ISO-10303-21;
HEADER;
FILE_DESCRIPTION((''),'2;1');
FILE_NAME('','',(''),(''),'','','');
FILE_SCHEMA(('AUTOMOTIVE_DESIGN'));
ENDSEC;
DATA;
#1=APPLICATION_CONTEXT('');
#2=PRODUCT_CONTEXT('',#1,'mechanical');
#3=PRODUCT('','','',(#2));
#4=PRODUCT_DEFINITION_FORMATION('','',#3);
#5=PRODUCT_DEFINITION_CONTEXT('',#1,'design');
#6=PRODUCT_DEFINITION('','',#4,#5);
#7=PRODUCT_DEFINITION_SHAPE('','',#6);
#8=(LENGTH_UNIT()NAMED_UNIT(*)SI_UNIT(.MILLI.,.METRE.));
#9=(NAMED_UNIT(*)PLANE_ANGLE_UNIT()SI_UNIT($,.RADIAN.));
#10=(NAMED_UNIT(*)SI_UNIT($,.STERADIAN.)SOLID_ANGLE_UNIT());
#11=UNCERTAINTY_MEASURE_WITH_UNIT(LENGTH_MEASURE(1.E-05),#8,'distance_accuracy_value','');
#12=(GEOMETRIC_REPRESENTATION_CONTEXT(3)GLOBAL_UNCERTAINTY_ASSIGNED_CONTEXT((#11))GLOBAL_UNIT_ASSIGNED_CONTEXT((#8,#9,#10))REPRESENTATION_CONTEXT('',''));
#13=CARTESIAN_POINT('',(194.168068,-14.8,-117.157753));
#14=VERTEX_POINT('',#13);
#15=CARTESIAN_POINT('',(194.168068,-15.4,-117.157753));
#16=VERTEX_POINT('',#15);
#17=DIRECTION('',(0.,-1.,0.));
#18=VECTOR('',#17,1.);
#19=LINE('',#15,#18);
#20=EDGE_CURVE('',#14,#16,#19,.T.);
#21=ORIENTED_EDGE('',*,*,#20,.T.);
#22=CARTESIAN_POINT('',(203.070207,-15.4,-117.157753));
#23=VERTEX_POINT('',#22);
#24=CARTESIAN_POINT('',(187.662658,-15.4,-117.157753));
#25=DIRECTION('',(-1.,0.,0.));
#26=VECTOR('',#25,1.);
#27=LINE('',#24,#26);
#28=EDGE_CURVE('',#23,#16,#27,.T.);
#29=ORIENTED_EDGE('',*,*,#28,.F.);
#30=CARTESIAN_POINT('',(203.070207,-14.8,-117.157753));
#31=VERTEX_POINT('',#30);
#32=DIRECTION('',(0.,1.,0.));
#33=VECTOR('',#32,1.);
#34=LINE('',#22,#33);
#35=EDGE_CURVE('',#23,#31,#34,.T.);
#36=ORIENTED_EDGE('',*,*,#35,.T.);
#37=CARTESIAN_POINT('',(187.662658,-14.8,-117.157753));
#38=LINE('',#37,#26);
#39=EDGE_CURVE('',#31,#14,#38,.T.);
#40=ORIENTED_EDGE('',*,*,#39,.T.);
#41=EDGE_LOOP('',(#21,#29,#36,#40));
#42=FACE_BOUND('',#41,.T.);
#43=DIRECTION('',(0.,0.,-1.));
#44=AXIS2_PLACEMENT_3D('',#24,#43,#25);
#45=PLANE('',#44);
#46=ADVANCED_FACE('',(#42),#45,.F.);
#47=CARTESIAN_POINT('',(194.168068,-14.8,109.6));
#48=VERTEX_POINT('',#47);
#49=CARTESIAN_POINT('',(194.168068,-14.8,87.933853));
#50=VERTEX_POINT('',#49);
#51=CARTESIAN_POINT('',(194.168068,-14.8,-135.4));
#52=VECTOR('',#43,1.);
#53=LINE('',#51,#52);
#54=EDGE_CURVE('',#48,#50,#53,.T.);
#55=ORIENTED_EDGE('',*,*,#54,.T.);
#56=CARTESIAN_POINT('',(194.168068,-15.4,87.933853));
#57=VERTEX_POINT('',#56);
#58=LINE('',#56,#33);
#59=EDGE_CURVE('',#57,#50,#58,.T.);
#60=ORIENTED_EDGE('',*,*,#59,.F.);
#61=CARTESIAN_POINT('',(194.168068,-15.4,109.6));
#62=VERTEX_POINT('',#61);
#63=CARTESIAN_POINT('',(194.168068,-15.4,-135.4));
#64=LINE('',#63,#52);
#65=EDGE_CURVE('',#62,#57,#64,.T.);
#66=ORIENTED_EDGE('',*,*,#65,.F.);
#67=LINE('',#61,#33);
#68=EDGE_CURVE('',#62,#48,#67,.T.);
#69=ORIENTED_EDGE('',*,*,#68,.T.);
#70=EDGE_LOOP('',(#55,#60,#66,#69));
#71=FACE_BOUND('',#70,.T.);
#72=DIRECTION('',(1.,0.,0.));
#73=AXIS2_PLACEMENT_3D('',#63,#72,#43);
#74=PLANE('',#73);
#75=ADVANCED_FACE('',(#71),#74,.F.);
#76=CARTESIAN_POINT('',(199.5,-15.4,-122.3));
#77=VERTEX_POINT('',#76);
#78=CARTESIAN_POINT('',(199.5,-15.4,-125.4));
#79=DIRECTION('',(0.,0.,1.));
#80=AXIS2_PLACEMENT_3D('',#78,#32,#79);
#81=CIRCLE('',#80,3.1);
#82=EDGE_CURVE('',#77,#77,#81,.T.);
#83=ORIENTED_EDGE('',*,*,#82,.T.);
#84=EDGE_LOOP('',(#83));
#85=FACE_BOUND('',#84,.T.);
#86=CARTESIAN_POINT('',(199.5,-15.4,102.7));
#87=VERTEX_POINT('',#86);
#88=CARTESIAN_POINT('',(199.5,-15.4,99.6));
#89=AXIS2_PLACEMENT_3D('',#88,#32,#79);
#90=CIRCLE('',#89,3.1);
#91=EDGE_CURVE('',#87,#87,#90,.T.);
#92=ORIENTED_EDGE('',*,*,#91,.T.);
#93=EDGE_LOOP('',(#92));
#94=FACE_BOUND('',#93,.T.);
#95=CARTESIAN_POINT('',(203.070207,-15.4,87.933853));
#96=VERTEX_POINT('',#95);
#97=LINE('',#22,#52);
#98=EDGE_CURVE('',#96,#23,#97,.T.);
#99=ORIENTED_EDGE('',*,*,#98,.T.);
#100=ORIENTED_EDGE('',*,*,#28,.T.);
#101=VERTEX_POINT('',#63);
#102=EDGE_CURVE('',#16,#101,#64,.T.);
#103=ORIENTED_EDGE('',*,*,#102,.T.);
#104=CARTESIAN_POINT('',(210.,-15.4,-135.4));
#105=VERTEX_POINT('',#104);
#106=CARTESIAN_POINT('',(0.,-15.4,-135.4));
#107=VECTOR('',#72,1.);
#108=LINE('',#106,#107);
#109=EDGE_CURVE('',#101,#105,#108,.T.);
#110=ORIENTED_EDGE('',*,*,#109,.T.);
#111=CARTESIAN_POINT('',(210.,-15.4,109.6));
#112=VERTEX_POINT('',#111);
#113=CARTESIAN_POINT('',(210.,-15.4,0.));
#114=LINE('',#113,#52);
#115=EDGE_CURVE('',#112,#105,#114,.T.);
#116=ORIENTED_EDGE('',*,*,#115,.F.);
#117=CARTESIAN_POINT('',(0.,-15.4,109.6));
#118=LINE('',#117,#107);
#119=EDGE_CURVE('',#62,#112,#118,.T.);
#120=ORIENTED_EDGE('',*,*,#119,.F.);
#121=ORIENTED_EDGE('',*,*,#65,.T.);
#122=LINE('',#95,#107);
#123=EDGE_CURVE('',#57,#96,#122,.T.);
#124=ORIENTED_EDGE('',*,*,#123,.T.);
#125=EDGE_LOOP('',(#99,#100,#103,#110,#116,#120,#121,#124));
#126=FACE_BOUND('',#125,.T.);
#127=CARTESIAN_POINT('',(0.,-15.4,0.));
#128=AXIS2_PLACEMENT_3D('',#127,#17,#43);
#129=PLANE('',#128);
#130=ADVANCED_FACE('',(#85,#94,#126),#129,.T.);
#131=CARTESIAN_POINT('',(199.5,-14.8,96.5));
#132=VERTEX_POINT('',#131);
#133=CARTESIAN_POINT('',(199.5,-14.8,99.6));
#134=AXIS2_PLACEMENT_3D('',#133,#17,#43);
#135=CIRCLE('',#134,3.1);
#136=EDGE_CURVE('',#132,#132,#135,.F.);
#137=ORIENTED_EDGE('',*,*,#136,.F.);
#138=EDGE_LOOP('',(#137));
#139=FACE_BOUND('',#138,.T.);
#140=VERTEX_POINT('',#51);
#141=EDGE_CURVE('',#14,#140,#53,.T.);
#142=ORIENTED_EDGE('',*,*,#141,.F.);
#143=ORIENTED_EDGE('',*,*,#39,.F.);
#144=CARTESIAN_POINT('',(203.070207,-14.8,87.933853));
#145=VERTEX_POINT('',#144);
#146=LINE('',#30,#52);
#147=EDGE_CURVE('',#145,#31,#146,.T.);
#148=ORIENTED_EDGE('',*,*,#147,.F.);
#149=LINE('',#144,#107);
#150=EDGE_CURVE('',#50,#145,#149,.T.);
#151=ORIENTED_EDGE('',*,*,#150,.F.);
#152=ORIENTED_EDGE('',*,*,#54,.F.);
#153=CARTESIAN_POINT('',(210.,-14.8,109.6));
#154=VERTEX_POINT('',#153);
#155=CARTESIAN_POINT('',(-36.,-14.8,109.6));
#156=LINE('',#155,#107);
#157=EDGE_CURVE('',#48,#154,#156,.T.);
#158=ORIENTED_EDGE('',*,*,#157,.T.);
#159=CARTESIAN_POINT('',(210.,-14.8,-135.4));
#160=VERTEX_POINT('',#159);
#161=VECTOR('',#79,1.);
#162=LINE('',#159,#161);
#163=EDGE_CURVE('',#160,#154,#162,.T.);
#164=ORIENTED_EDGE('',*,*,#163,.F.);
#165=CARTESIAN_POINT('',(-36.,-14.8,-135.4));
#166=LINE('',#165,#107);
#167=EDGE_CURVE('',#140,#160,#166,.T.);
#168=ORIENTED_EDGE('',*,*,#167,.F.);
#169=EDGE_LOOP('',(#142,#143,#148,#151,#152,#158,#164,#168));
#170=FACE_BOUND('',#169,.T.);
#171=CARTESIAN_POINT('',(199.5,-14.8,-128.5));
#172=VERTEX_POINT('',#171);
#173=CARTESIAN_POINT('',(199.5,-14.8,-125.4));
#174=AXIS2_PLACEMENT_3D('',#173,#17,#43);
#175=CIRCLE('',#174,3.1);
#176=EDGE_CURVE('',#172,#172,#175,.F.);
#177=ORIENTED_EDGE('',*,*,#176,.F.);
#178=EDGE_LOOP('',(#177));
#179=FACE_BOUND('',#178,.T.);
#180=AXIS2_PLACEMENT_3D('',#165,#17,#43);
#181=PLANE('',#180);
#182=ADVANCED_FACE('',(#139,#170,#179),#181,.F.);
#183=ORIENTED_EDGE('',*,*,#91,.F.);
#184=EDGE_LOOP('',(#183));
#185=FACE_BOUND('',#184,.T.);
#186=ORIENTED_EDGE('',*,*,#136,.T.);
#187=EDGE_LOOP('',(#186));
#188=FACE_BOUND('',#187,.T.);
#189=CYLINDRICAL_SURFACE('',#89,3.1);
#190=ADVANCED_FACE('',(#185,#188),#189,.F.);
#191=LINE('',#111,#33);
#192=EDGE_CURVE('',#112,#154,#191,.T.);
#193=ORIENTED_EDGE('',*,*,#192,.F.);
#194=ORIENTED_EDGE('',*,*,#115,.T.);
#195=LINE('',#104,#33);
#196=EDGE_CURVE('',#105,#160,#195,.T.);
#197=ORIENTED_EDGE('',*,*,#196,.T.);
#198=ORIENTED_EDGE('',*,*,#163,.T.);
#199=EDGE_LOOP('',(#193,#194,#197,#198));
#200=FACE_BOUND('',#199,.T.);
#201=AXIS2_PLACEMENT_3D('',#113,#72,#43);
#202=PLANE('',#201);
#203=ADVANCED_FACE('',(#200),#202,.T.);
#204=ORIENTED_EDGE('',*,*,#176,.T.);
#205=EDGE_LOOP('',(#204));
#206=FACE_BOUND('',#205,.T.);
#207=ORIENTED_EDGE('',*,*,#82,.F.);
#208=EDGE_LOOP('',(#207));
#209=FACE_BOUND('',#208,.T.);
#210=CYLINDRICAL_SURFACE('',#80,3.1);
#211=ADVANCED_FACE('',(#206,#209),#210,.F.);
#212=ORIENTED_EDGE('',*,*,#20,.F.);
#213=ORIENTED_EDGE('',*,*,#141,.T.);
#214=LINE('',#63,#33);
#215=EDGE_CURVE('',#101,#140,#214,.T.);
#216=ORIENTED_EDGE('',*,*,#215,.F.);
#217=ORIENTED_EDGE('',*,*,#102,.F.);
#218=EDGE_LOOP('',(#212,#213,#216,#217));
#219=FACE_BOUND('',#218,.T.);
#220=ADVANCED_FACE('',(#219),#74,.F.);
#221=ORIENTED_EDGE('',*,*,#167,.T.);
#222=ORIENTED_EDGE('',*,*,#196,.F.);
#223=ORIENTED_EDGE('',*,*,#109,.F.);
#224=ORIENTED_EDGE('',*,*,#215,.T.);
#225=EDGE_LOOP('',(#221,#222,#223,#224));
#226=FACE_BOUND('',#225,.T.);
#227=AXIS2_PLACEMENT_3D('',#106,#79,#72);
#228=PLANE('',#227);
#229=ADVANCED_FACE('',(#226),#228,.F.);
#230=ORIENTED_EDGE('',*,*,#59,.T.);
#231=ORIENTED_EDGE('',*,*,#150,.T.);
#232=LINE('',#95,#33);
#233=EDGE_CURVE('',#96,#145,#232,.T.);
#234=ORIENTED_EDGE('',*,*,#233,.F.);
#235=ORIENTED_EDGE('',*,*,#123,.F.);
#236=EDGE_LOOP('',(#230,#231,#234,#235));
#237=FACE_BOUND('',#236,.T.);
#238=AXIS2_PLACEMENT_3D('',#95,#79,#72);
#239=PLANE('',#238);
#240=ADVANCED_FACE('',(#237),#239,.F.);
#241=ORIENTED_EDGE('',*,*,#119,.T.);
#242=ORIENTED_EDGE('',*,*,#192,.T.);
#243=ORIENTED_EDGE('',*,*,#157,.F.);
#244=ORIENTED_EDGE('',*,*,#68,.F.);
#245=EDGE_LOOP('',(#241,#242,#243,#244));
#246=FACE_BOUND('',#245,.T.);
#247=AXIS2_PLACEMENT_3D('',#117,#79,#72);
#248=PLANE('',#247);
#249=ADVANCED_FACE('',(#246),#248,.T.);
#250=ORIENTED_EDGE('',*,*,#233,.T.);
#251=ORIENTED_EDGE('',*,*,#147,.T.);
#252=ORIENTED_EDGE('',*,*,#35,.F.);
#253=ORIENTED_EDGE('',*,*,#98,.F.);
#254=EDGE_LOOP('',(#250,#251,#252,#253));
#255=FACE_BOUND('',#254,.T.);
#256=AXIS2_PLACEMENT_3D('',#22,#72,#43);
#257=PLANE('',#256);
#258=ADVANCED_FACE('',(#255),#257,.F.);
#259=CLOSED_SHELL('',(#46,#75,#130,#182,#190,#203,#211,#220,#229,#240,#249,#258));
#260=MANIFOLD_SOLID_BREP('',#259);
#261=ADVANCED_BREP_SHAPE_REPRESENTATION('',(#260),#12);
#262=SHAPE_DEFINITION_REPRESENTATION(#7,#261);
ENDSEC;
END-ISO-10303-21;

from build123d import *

# Parameters (mm, degrees)
BOSS_EXTRUDE1_DEPTH   = 5.5
BOSS_EXTRUDE1_2_DEPTH = 5.5
SKETCH2_W             = 112.4
SKETCH2_H             = 112.4
BOSS_EXTRUDE2_DEPTH   = 9.4
BOSS_EXTRUDE3_START   = 9.4
SKETCH2_3_W           = 246
SKETCH2_3_H           = 245
BOSS_EXTRUDE3_DEPTH   = 6
SKETCH3_R             = 3.1
CUT_EXTRUDE1_DEPTH    = 251.310147617
BOSS_EXTRUDE4_DEPTH   = 15
SKETCH5_W             = 16
SKETCH5_H             = 22.5
BOSS_EXTRUDE5_DEPTH   = 3.9
SKETCH6_W             = 16
SKETCH6_H             = 20.5
CUT_EXTRUDE2_DEPTH    = 3.4
CHAMFER1_SIZE         = 2
CHAMFER2_SIZE         = 3.05
CHAMFER3_SIZE         = 3
CHAMFER4_SIZE         = 3
SKETCH8_W             = 79.1
SKETCH8_H             = 5
CUT_EXTRUDE3_DEPTH    = 0.1
SKETCH9_W             = 246
SKETCH9_H             = 27.9
CUT_EXTRUDE4_DEPTH    = 324.051327191
CUT_EXTRUDE5_DEPTH    = 250.867004624
SKETCH11_W            = 230.168067581
SKETCH11_H            = 245
CUT_EXTRUDE6_DEPTH    = 250.867004624


with BuildPart() as part:
    # Sketch1 → Boss-Extrude1 (new body)
    with BuildSketch(Plane(origin=(0, 0, 0), x_dir=(1, 0, 0), z_dir=(0, 1, 0))):
        Polygon((-6, -6), (-6, 106.4), (7.7, 106.4), (7.7, 100.4), (0, 100.4), (0, 0), (100.4, 0), (100.4, 40.9), (106.4, 40.9), (106.4, -6), align=None)
    extrude(amount=BOSS_EXTRUDE1_DEPTH)



with BuildPart() as body_2:
    # Sketch1 → Boss-Extrude1 2 (new body)
    with BuildSketch(Plane(origin=(0, 0, 0), x_dir=(1, 0, 0), z_dir=(0, 1, 0))):
        Polygon((92.7, 100.4), (92.7, 106.4), (106.4, 106.4), (106.4, 59.5), (100.4, 59.5), (100.4, 100.4), align=None)
    extrude(amount=BOSS_EXTRUDE1_2_DEPTH)


with BuildPart() as part_1:
    add(part.part)

    add(body_2.part)  # Boss-Extrude2 merges body 2
    # Sketch2 → Boss-Extrude2 (add)
    with BuildSketch(Plane.XZ):
        with Locations((50.2, -50.2)):
            Rectangle(SKETCH2_W, SKETCH2_H)
    extrude(amount=BOSS_EXTRUDE2_DEPTH)

    # Sketch2<3> → Boss-Extrude3 (add)
    with BuildSketch(Plane.XZ.offset(BOSS_EXTRUDE3_START)):
        with Locations((87, -12.9)):
            Rectangle(SKETCH2_3_W, SKETCH2_3_H)
    extrude(amount=BOSS_EXTRUDE3_DEPTH)

    # Sketch3 → Cut-Extrude1 (cut, through all)
    with BuildSketch(Plane(origin=(0, -9.4, 0), x_dir=(1, 0, 0), z_dir=(0, 1, 0))):
        with Locations(Location((-26.5, 125.4, 0), (0, 0, 270))):
            Circle(SKETCH3_R)
        with Locations(Location((-26.5, -99.6, 0), (0, 0, 90))):
            Circle(SKETCH3_R)
        with Locations(Location((199.5, 125.4, 0), (0, 0, 270))):
            Circle(SKETCH3_R)
        with Locations(Location((199.5, -99.6, 0), (0, 0, 270))):
            Circle(SKETCH3_R)
    extrude(amount=-CUT_EXTRUDE1_DEPTH, mode=Mode.SUBTRACT)

    # Sketch4 → Boss-Extrude4 (add)
    with BuildSketch(Plane(origin=(0, -9.4, 0), x_dir=(1, 0, 0), z_dir=(0, 1, 0))):
        with BuildLine():
            Line((-16, -109.6), (49, -109.6))
            Line((49, -109.6), (49, -6))
            Line((49, -6), (-36, -6))
            Line((-36, -6), (-36, -89.6))
            Line((-36, -89.6), (-22, -89.6))
            ThreePointArc((-22, -89.6), (-17.757359313, -91.357359313), (-16, -95.6))
            Line((-16, -95.6), (-16, -109.6))
        make_face()
    extrude(amount=BOSS_EXTRUDE4_DEPTH)

    # Sketch5 → Boss-Extrude5 (add)
    with BuildSketch(Plane(origin=(0, 0, -106.4), x_dir=(-1, 0, 0), z_dir=(0, 0, -1))):
        with Locations((-99.9, 1.85)):
            Rectangle(SKETCH5_W, SKETCH5_H)
        with Locations((-0.5, 1.85)):
            Rectangle(SKETCH5_W, SKETCH5_H)
    extrude(amount=BOSS_EXTRUDE5_DEPTH)

    # Sketch6 → Cut-Extrude2 (cut)
    with BuildSketch(Plane(origin=(0, 0, -110.3), x_dir=(-1, 0, 0), z_dir=(0, 0, -1))):
        with Locations((-0.5, 0.85)):
            Rectangle(SKETCH6_W, SKETCH6_H)
        with Locations((-99.9, 0.85)):
            Rectangle(SKETCH6_W, SKETCH6_H)
    extrude(amount=-CUT_EXTRUDE2_DEPTH, mode=Mode.SUBTRACT)

    # Chamfer1
    # the kernel refuses this chamfer: 2 mm, written as the material it adds along each edge
    with BuildSketch(Plane(origin=(92.7, -5.143365976, -106.4), x_dir=(-0.9996219169112968, 0, -0.027495876610589005), z_dir=(0, 1, 0))) as chamfer1_piece_1_section:
        Polygon((CHAMFER1_SIZE * 0.999621916911, CHAMFER1_SIZE * 0.0274958766106), (-CHAMFER1_SIZE * 0.0274958766106, CHAMFER1_SIZE * 0.999621916911), (0, 0), align=None)
    chamfer1_piece_1 = extrude(amount=10.643365976, mode=Mode.PRIVATE)
    chamfer1_piece_1 = split(chamfer1_piece_1, bisect_by=Plane(origin=(91.9, -2.571682988, -105.57221902), z_dir=(1, 0, 0)), keep=Keep.TOP, mode=Mode.PRIVATE)
    add(chamfer1_piece_1)
    with BuildSketch(Plane(origin=(92.7, 5.5, -106.4), x_dir=(0, 0.9996219169112968, -0.027495876610589075), z_dir=(1, 0, 0)), Plane(origin=(-6, 5.5, -106.4), x_dir=(0, 0.9996219169112968, -0.027495876610589075), z_dir=(1, 0, 0))) as chamfer1_piece_2:
        Polygon((CHAMFER1_SIZE * 0.999621916911, CHAMFER1_SIZE * 0.0274958766106), (-CHAMFER1_SIZE * 0.0274958766106, CHAMFER1_SIZE * 0.999621916911), (0, 0), align=None)
    extrude(amount=13.7)
    with BuildSketch(Plane(origin=(106.4, 5.5, -106.4), x_dir=(-0.027495876610589005, 0, 0.9996219169112968), z_dir=(0, -1, 0))) as chamfer1_piece_3_section:
        Polygon((CHAMFER1_SIZE * 0.999621916911, -CHAMFER1_SIZE * 0.0274958766106), (-CHAMFER1_SIZE * 0.0274958766106, -CHAMFER1_SIZE * 0.999621916911), (0, 0), align=None)
    chamfer1_piece_3 = extrude(amount=14.9, mode=Mode.PRIVATE)
    chamfer1_piece_3 = split(chamfer1_piece_3, bisect_by=Plane(origin=(107.9, -1.95, -105.69608178), z_dir=(-1, 0, 0)), keep=Keep.TOP, mode=Mode.PRIVATE)
    add(chamfer1_piece_3)
    with BuildSketch(Plane(origin=(106.4, 5.5, -106.4), x_dir=(-0.027495876610589005, 0, 0.9996219169112968), z_dir=(0, -1, 0))) as chamfer1_piece_4_section:
        Polygon((CHAMFER1_SIZE * 0.999621916911, -CHAMFER1_SIZE * 0.0274958766106), (-CHAMFER1_SIZE * 0.0274958766106, -CHAMFER1_SIZE * 0.999621916911), (0, 0), align=None)
    chamfer1_piece_4 = extrude(amount=20.043365976, mode=Mode.PRIVATE)
    chamfer1_piece_4 = split(chamfer1_piece_4, bisect_by=Plane(origin=(106.974972825, -9.4, -105.69608178), z_dir=(0, -1, 0)), keep=Keep.TOP, mode=Mode.PRIVATE)
    chamfer1_piece_4 = split(chamfer1_piece_4, bisect_by=Plane(origin=(107.9, -11.971682988, -105.69608178), z_dir=(-1, 0, 0)), keep=Keep.TOP, mode=Mode.PRIVATE)
    add(chamfer1_piece_4)
    with BuildSketch(Plane(origin=(106.4, 5.5, -106.4), x_dir=(-0.027495876610589005, 0, 0.9996219169112968), z_dir=(0, -1, 0))) as chamfer1_piece_5_section:
        Polygon((CHAMFER1_SIZE * 0.999621916911, -CHAMFER1_SIZE * 0.0274958766106), (-CHAMFER1_SIZE * 0.0274958766106, -CHAMFER1_SIZE * 0.999621916911), (0, 0), align=None)
    chamfer1_piece_5 = extrude(amount=20.043365976, mode=Mode.PRIVATE)
    chamfer1_piece_5 = split(chamfer1_piece_5, bisect_by=Plane(origin=(108.09753906, -9.4, -106.284213701), z_dir=(0, -1, 0)), keep=Keep.TOP, mode=Mode.PRIVATE)
    chamfer1_piece_5 = split(chamfer1_piece_5, bisect_by=Plane(origin=(107.9, -11.971682988, -106.284213701), z_dir=(1, 0, 0)), keep=Keep.TOP, mode=Mode.PRIVATE)
    add(chamfer1_piece_5)
    with BuildSketch(Plane(origin=(7.7, -5.143365976, -106.4), x_dir=(0.9996219169112965, 0, -0.027495876610589057), z_dir=(0, 1, 0))) as chamfer1_piece_6_section:
        Polygon((CHAMFER1_SIZE * 0.999621916911, -CHAMFER1_SIZE * 0.0274958766106), (-CHAMFER1_SIZE * 0.0274958766106, -CHAMFER1_SIZE * 0.999621916911), (0, 0), align=None)
    chamfer1_piece_6 = extrude(amount=10.643365976, mode=Mode.PRIVATE)
    chamfer1_piece_6 = split(chamfer1_piece_6, bisect_by=Plane(origin=(8.5, -2.571682988, -105.57221902), z_dir=(-1, 0, 0)), keep=Keep.TOP, mode=Mode.PRIVATE)
    add(chamfer1_piece_6)
    with BuildSketch(Plane(origin=(-6, 5.5, -106.4), x_dir=(-0.9996219169112968, 0, -0.027495876610589075), z_dir=(0, -1, 0))) as chamfer1_piece_7_section:
        Polygon((CHAMFER1_SIZE * 0.999621916911, -CHAMFER1_SIZE * 0.0274958766106), (-CHAMFER1_SIZE * 0.0274958766106, -CHAMFER1_SIZE * 0.999621916911), (0, 0), align=None)
    chamfer1_piece_7 = extrude(amount=14.9, mode=Mode.PRIVATE)
    chamfer1_piece_7 = split(chamfer1_piece_7, bisect_by=Plane(origin=(-7.5, -1.95, -105.69608178), z_dir=(1, 0, 0)), keep=Keep.TOP, mode=Mode.PRIVATE)
    add(chamfer1_piece_7)
    with BuildSketch(Plane(origin=(-6, 5.5, -106.4), x_dir=(-0.9996219169112968, 0, -0.027495876610589075), z_dir=(0, -1, 0))) as chamfer1_piece_8_section:
        Polygon((CHAMFER1_SIZE * 0.999621916911, -CHAMFER1_SIZE * 0.0274958766106), (-CHAMFER1_SIZE * 0.0274958766106, -CHAMFER1_SIZE * 0.999621916911), (0, 0), align=None)
    chamfer1_piece_8 = extrude(amount=20.043365976, mode=Mode.PRIVATE)
    chamfer1_piece_8 = split(chamfer1_piece_8, bisect_by=Plane(origin=(-7.69753906, -9.4, -106.284213701), z_dir=(0, -1, 0)), keep=Keep.TOP, mode=Mode.PRIVATE)
    chamfer1_piece_8 = split(chamfer1_piece_8, bisect_by=Plane(origin=(-7.5, -11.971682988, -106.284213701), z_dir=(-1, 0, 0)), keep=Keep.TOP, mode=Mode.PRIVATE)
    add(chamfer1_piece_8)
    with BuildSketch(Plane(origin=(-6, 5.5, -106.4), x_dir=(-0.9996219169112968, 0, -0.027495876610589075), z_dir=(0, -1, 0))) as chamfer1_piece_9_section:
        Polygon((CHAMFER1_SIZE * 0.999621916911, -CHAMFER1_SIZE * 0.0274958766106), (-CHAMFER1_SIZE * 0.0274958766106, -CHAMFER1_SIZE * 0.999621916911), (0, 0), align=None)
    chamfer1_piece_9 = extrude(amount=20.043365976, mode=Mode.PRIVATE)
    chamfer1_piece_9 = split(chamfer1_piece_9, bisect_by=Plane(origin=(-6.574972825, -9.4, -105.69608178), z_dir=(0, -1, 0)), keep=Keep.TOP, mode=Mode.PRIVATE)
    chamfer1_piece_9 = split(chamfer1_piece_9, bisect_by=Plane(origin=(-7.5, -11.971682988, -105.69608178), z_dir=(1, 0, 0)), keep=Keep.TOP, mode=Mode.PRIVATE)
    add(chamfer1_piece_9)
    with BuildSketch(Plane(origin=(87.556634024, 5.5, -106.4), x_dir=(0, 0.9996219169112968, -0.027495876610589075), z_dir=(1, 0, 0))) as chamfer1_piece_10a_section:
        Polygon((CHAMFER1_SIZE * 0.999621916911, CHAMFER1_SIZE * 0.0274958766106), (-CHAMFER1_SIZE * 0.0274958766106, CHAMFER1_SIZE * 0.999621916911), (0, 0), align=None)
    chamfer1_piece_10a = extrude(amount=18.843365976, mode=Mode.PRIVATE)
    chamfer1_piece_10a = split(chamfer1_piece_10a, bisect_by=Plane(origin=(91.9, 6.159587254, -105.740412746), z_dir=(1, 0, 0)), keep=Keep.TOP, mode=Mode.PRIVATE)
    chamfer1_piece_10a = split(chamfer1_piece_10a, bisect_by=Plane(origin=(92.7, 6.159587254, -105.740412746), z_dir=(-1, 0, 0)), keep=Keep.TOP, mode=Mode.PRIVATE)
    with BuildSketch(Plane(origin=(92.7, 0, -106.4), x_dir=(-0.9996219169112968, 0, -0.027495876610589005), z_dir=(0, 1, 0))) as chamfer1_piece_10b_section:
        Polygon((CHAMFER1_SIZE * 0.999621916911, CHAMFER1_SIZE * 0.0274958766106), (-CHAMFER1_SIZE * 0.0274958766106, CHAMFER1_SIZE * 0.999621916911), (0, 0), align=None)
    chamfer1_piece_10b = extrude(amount=10.643365976, mode=Mode.PRIVATE)
    chamfer1_piece_10b = split(chamfer1_piece_10b, bisect_by=Plane(origin=(91.9, 8.071682988, -105.57221902), z_dir=(1, 0, 0)), keep=Keep.TOP, mode=Mode.PRIVATE)
    chamfer1_piece_10b = split(chamfer1_piece_10b, bisect_by=Plane(origin=(92.36112716, 5.5, -105.57221902), z_dir=(0, 1, 0)), keep=Keep.TOP, mode=Mode.PRIVATE)
    chamfer1_piece_10 = chamfer1_piece_10a & chamfer1_piece_10b
    add(chamfer1_piece_10)
    with BuildSketch(Plane(origin=(106.4, 10.643365976, -106.4), x_dir=(-0.027495876610589005, 0, 0.9996219169112968), z_dir=(0, -1, 0))) as chamfer1_piece_11a_section:
        Polygon((CHAMFER1_SIZE * 0.999621916911, -CHAMFER1_SIZE * 0.0274958766106), (-CHAMFER1_SIZE * 0.0274958766106, -CHAMFER1_SIZE * 0.999621916911), (0, 0), align=None)
    chamfer1_piece_11a = extrude(amount=20.043365976, mode=Mode.PRIVATE)
    chamfer1_piece_11a = split(chamfer1_piece_11a, bisect_by=Plane(origin=(106.974972825, 5.5, -105.69608178), z_dir=(0, 1, 0)), keep=Keep.TOP, mode=Mode.PRIVATE)
    chamfer1_piece_11a = split(chamfer1_piece_11a, bisect_by=Plane(origin=(107.9, 8.071682988, -105.69608178), z_dir=(-1, 0, 0)), keep=Keep.TOP, mode=Mode.PRIVATE)
    with BuildSketch(Plane(origin=(92.7, 5.5, -106.4), x_dir=(0, 0.9996219169112968, -0.027495876610589075), z_dir=(1, 0, 0))) as chamfer1_piece_11b_section:
        Polygon((CHAMFER1_SIZE * 0.999621916911, CHAMFER1_SIZE * 0.0274958766106), (-CHAMFER1_SIZE * 0.0274958766106, CHAMFER1_SIZE * 0.999621916911), (0, 0), align=None)
    chamfer1_piece_11b = extrude(amount=18.843365976, mode=Mode.PRIVATE)
    chamfer1_piece_11b = split(chamfer1_piece_11b, bisect_by=Plane(origin=(106.4, 6.159587254, -105.740412746), z_dir=(1, 0, 0)), keep=Keep.TOP, mode=Mode.PRIVATE)
    chamfer1_piece_11b = split(chamfer1_piece_11b, bisect_by=Plane(origin=(107.9, 6.159587254, -105.740412746), z_dir=(-1, 0, 0)), keep=Keep.TOP, mode=Mode.PRIVATE)
    chamfer1_piece_11 = chamfer1_piece_11a & chamfer1_piece_11b
    add(chamfer1_piece_11)
    with BuildSketch(Plane(origin=(-6, 5.5, -106.4), x_dir=(0, 0.9996219169112968, -0.027495876610589075), z_dir=(1, 0, 0))) as chamfer1_piece_12a_section:
        Polygon((CHAMFER1_SIZE * 0.999621916911, CHAMFER1_SIZE * 0.0274958766106), (-CHAMFER1_SIZE * 0.0274958766106, CHAMFER1_SIZE * 0.999621916911), (0, 0), align=None)
    chamfer1_piece_12a = extrude(amount=18.843365976, mode=Mode.PRIVATE)
    chamfer1_piece_12a = split(chamfer1_piece_12a, bisect_by=Plane(origin=(8.5, 6.159587254, -105.740412746), z_dir=(-1, 0, 0)), keep=Keep.TOP, mode=Mode.PRIVATE)
    chamfer1_piece_12a = split(chamfer1_piece_12a, bisect_by=Plane(origin=(7.7, 6.159587254, -105.740412746), z_dir=(1, 0, 0)), keep=Keep.TOP, mode=Mode.PRIVATE)
    with BuildSketch(Plane(origin=(7.7, 0, -106.4), x_dir=(0.9996219169112965, 0, -0.027495876610589057), z_dir=(0, 1, 0))) as chamfer1_piece_12b_section:
        Polygon((CHAMFER1_SIZE * 0.999621916911, -CHAMFER1_SIZE * 0.0274958766106), (-CHAMFER1_SIZE * 0.0274958766106, -CHAMFER1_SIZE * 0.999621916911), (0, 0), align=None)
    chamfer1_piece_12b = extrude(amount=10.643365976, mode=Mode.PRIVATE)
    chamfer1_piece_12b = split(chamfer1_piece_12b, bisect_by=Plane(origin=(8.5, 8.071682988, -105.57221902), z_dir=(-1, 0, 0)), keep=Keep.TOP, mode=Mode.PRIVATE)
    chamfer1_piece_12b = split(chamfer1_piece_12b, bisect_by=Plane(origin=(8.03887284, 5.5, -105.57221902), z_dir=(0, 1, 0)), keep=Keep.TOP, mode=Mode.PRIVATE)
    chamfer1_piece_12 = chamfer1_piece_12a & chamfer1_piece_12b
    add(chamfer1_piece_12)
    with BuildSketch(Plane(origin=(-6, 10.643365976, -106.4), x_dir=(-0.9996219169112968, 0, -0.027495876610589075), z_dir=(0, -1, 0))) as chamfer1_piece_13a_section:
        Polygon((CHAMFER1_SIZE * 0.999621916911, -CHAMFER1_SIZE * 0.0274958766106), (-CHAMFER1_SIZE * 0.0274958766106, -CHAMFER1_SIZE * 0.999621916911), (0, 0), align=None)
    chamfer1_piece_13a = extrude(amount=20.043365976, mode=Mode.PRIVATE)
    chamfer1_piece_13a = split(chamfer1_piece_13a, bisect_by=Plane(origin=(-7.5, 8.071682988, -105.69608178), z_dir=(1, 0, 0)), keep=Keep.TOP, mode=Mode.PRIVATE)
    chamfer1_piece_13a = split(chamfer1_piece_13a, bisect_by=Plane(origin=(-6.574972825, 5.5, -105.69608178), z_dir=(0, 1, 0)), keep=Keep.TOP, mode=Mode.PRIVATE)
    with BuildSketch(Plane(origin=(-11.143365976, 5.5, -106.4), x_dir=(0, 0.9996219169112968, -0.027495876610589075), z_dir=(1, 0, 0))) as chamfer1_piece_13b_section:
        Polygon((CHAMFER1_SIZE * 0.999621916911, CHAMFER1_SIZE * 0.0274958766106), (-CHAMFER1_SIZE * 0.0274958766106, CHAMFER1_SIZE * 0.999621916911), (0, 0), align=None)
    chamfer1_piece_13b = extrude(amount=18.843365976, mode=Mode.PRIVATE)
    chamfer1_piece_13b = split(chamfer1_piece_13b, bisect_by=Plane(origin=(-7.5, 6.159587254, -105.740412746), z_dir=(1, 0, 0)), keep=Keep.TOP, mode=Mode.PRIVATE)
    chamfer1_piece_13b = split(chamfer1_piece_13b, bisect_by=Plane(origin=(-6, 6.159587254, -105.740412746), z_dir=(-1, 0, 0)), keep=Keep.TOP, mode=Mode.PRIVATE)
    chamfer1_piece_13 = chamfer1_piece_13a & chamfer1_piece_13b
    add(chamfer1_piece_13)
    # the kernel refuses this chamfer: 2 mm, written as the material it takes off along each edge
    with BuildSketch(Plane(origin=(113.043365976, 13.1, -106.4), x_dir=(1.4427442484973125e-15, -0.9996219169112968, 0.027495876610589075), z_dir=(-1, 0, 0)), Plane(origin=(-12.643365976, 13.1, -106.4), x_dir=(0, 0.027495876610586414, -0.9996219169112968), z_dir=(1, 0, 0))) as chamfer1_2_piece_1:
        Polygon((CHAMFER1_SIZE * 0.999621916911, -CHAMFER1_SIZE * 0.0274958766106), (-CHAMFER1_SIZE * 0.0274958766106, -CHAMFER1_SIZE * 0.999621916911), (0, 0), align=None)
    extrude(amount=26.286731952, mode=Mode.SUBTRACT)

    # Chamfer2
    chamfer2_edges = [part_1.edges().sort_by_distance(p)[0] for p in [
        (199.5, -9.4, -128.5),
        (-26.5, -9.4, -128.5),
        (-26.5, -9.4, 102.7),
        (199.5, -9.4, 96.5),
    ]]
    chamfer(chamfer2_edges, length=CHAMFER2_SIZE)

    # Chamfer3
    chamfer3_edges = [part_1.edges().sort_by_distance(p)[0] for p in [
        (106.4, 5.5, -17.45),
    ]]
    chamfer(chamfer3_edges, length=CHAMFER3_SIZE)
    chamfer3_2_edges = [part_1.edges().sort_by_distance(p)[0] for p in [
        (106.4, 5.5, -81.95),
    ]]
    chamfer(chamfer3_2_edges, length=CHAMFER3_SIZE)
    chamfer3_3_edges = [part_1.edges().sort_by_distance(p)[0] for p in [
        (76.2, 5.5, 6),
    ]]
    chamfer(chamfer3_3_edges, length=CHAMFER3_SIZE)
    chamfer3_4_edges = [part_1.edges().sort_by_distance(p)[0] for p in [
        (49, 5.6, 57.8),
    ]]
    chamfer(chamfer3_4_edges, length=CHAMFER3_SIZE)
    chamfer3_5_edges = [part_1.edges().sort_by_distance(p)[0] for p in [
        (15, 5.6, 109.6),
    ]]
    chamfer(chamfer3_5_edges, length=CHAMFER3_SIZE)
    chamfer3_6_edges = [part_1.edges().sort_by_distance(p)[0] for p in [
        (-36, 5.6, 47.8),
    ]]
    chamfer(chamfer3_6_edges, length=CHAMFER3_SIZE)
    chamfer3_7_edges = [part_1.edges().sort_by_distance(p)[0] for p in [
        (-6, 5.5, -49.2),
    ]]
    chamfer(chamfer3_7_edges, length=CHAMFER3_SIZE)
    chamfer3_8_edges = [part_1.edges().sort_by_distance(p)[0] for p in [
        (-16, 5.6, 101.1),
        (-27.5, 5.6, 89.6),
        (-17.757359313, 5.6, 91.357359313),
    ]]
    chamfer(chamfer3_8_edges, length=CHAMFER3_SIZE)

    # Chamfer4
    chamfer4_edges = [part_1.edges().sort_by_distance(p)[0] for p in [
        (-36, -9.4, -64.7),
        (129.5, -9.4, 109.6),
        (-36, -3.4, 89.6),
        (-36, -3.4, 6),
        (-16, -3.4, 109.6),
        (49, -3.4, 109.6),
        (-36, -9.4, 99.6),
        (87, -9.4, -135.4),
        (-26, -9.4, 109.6),
        (210, -9.4, -12.9),
    ]]
    chamfer(chamfer4_edges, length=CHAMFER4_SIZE)

    # Sketch8 → Cut-Extrude3 (cut)
    with BuildSketch(Plane(origin=(0, 5.6, 0), x_dir=(1, 0, 0), z_dir=(0, 1, 0))):
        with Locations((6.55, -8.5)):
            Rectangle(SKETCH8_W, SKETCH8_H)
    extrude(amount=-CUT_EXTRUDE3_DEPTH, mode=Mode.SUBTRACT)

    # Chamfer5
    # the kernel refuses this chamfer: 3 mm, written as the material it takes off along each edge
    with BuildSketch(Plane(origin=(6.229157809, 5.5, 6), x_dir=(0, -0.9850292351397439, -0.17238737169529297), z_dir=(-1, 0, 0))) as chamfer5_piece_1_section:
        with BuildLine():
            Line((3.691663124, 0), (-1.253737533, 3.472249821))
            Line((-1.253737533, 3.472249821), (-1.697000689, 3.394675503))
            ThreePointArc((-1.697000689, 3.394675503), (-0.756697539, 1.713403919), (-0.443263156, -0.077574317))
            Line((-0.443263156, -0.077574317), (0.077574317, -0.443263156))
            ThreePointArc((0.077574317, -0.443263156), (1.868552553, -0.129828772), (3.769237441, -0.443263156))
            Line((3.769237441, -0.443263156), (3.691663124, 0))
        make_face()
    chamfer5_piece_1 = extrude(amount=39.229157809, mode=Mode.PRIVATE)
    chamfer5_piece_1 = split(chamfer5_piece_1, bisect_by=Plane(origin=(-4.039459416, 4.460540584, 7.280331392), z_dir=(-0.7071067811865476, 0.7071067811865476, 0)), keep=Keep.TOP, mode=Mode.PRIVATE)
    chamfer5_piece_1 = split(chamfer5_piece_1, bisect_by=Plane(origin=(-6, 5.114054112, 7.280331392), z_dir=(1, 0, 0)), keep=Keep.TOP, mode=Mode.PRIVATE)
    add(chamfer5_piece_1, mode=Mode.SUBTRACT)
    with BuildSketch(Plane(origin=(6.229157809, 5.5, 6), x_dir=(0, -0.9850292351397439, -0.17238737169529297), z_dir=(-1, 0, 0))) as chamfer5_piece_2_section:
        with BuildLine():
            Line((3.691663124, 0), (-1.253737533, 3.472249821))
            Line((-1.253737533, 3.472249821), (-1.697000689, 3.394675503))
            ThreePointArc((-1.697000689, 3.394675503), (-0.756697539, 1.713403919), (-0.443263156, -0.077574317))
            Line((-0.443263156, -0.077574317), (0.077574317, -0.443263156))
            ThreePointArc((0.077574317, -0.443263156), (1.868552553, -0.129828772), (3.769237441, -0.443263156))
            Line((3.769237441, -0.443263156), (3.691663124, 0))
        make_face()
    chamfer5_piece_2 = extrude(amount=39.229157809, mode=Mode.PRIVATE)
    chamfer5_piece_2 = split(chamfer5_piece_2, bisect_by=Plane(origin=(-6.302738925, 2.197261075, 5.315019574), z_dir=(0.7071067811865476, -0.7071067811865476, 0)), keep=Keep.TOP, mode=Mode.PRIVATE)
    chamfer5_piece_2 = split(chamfer5_piece_2, bisect_by=Plane(origin=(-6, 2.0963481, 5.315019574), z_dir=(-1, 0, 0)), keep=Keep.TOP, mode=Mode.PRIVATE)
    add(chamfer5_piece_2, mode=Mode.SUBTRACT)
    with BuildSketch(Plane(origin=(6.229157809, 5.5, 6), x_dir=(0, -0.9850292351397439, -0.17238737169529297), z_dir=(-1, 0, 0))) as chamfer5_piece_3_section:
        with BuildLine():
            Line((3.691663124, 0), (-1.253737533, 3.472249821))
            Line((-1.253737533, 3.472249821), (-1.697000689, 3.394675503))
            ThreePointArc((-1.697000689, 3.394675503), (-0.756697539, 1.713403919), (-0.443263156, -0.077574317))
            Line((-0.443263156, -0.077574317), (0.077574317, -0.443263156))
            ThreePointArc((0.077574317, -0.443263156), (1.868552553, -0.129828772), (3.769237441, -0.443263156))
            Line((3.769237441, -0.443263156), (3.691663124, 0))
        make_face()
    chamfer5_piece_3 = extrude(amount=39.229157809, mode=Mode.PRIVATE)
    chamfer5_piece_3 = split(chamfer5_piece_3, bisect_by=Plane(origin=(-11.711520685, -3.211520685, 6.918404597), z_dir=(-0.7071067811865476, 0.7071067811865476, 0)), keep=Keep.TOP, mode=Mode.PRIVATE)
    chamfer5_piece_3 = split(chamfer5_piece_3, bisect_by=Plane(origin=(-6, 4.583653926, 6.918404597), z_dir=(-1, 0, 0)), keep=Keep.TOP, mode=Mode.PRIVATE)
    add(chamfer5_piece_3, mode=Mode.SUBTRACT)
    with BuildSketch(Plane(origin=(6.229157809, 5.5, 6), x_dir=(0, -0.9850292351397439, -0.17238737169529297), z_dir=(-1, 0, 0))) as chamfer5_piece_4_section:
        with BuildLine():
            Line((3.691663124, 0), (-1.253737533, 3.472249821))
            Line((-1.253737533, 3.472249821), (-1.697000689, 3.394675503))
            ThreePointArc((-1.697000689, 3.394675503), (-0.756697539, 1.713403919), (-0.443263156, -0.077574317))
            Line((-0.443263156, -0.077574317), (0.077574317, -0.443263156))
            ThreePointArc((0.077574317, -0.443263156), (1.868552553, -0.129828772), (3.769237441, -0.443263156))
            Line((3.769237441, -0.443263156), (3.691663124, 0))
        make_face()
    chamfer5_piece_4 = extrude(amount=48.458315618, mode=Mode.PRIVATE)
    chamfer5_piece_4 = split(chamfer5_piece_4, bisect_by=Plane(origin=(-33, 4.582402261, 6.917597739), z_dir=(-1, 0, 0)), keep=Keep.TOP, mode=Mode.PRIVATE)
    add(chamfer5_piece_4, mode=Mode.SUBTRACT)

    # Sketch9 → Cut-Extrude4 (cut, through all)
    with BuildSketch(Plane.XY.offset(109.6)):
        with Locations((87, -0.85)):
            Rectangle(SKETCH9_W, SKETCH9_H)
    extrude(amount=-CUT_EXTRUDE4_DEPTH, mode=Mode.SUBTRACT)

    # Sketch10 → Cut-Extrude5 (cut, through all)
    with BuildSketch(Plane(origin=(0, -14.8, 0), x_dir=(1, 0, 0), z_dir=(0, 1, 0))):
        Polygon((-13.320267735, 126.74467243), (187.662657728, 126.74467243), (187.662657728, 117.157752647), (203.07020738, 117.157752647), (203.07020738, -87.933852724), (190.401777666, -87.933852724), (190.401777666, -102.656622391), (-18.113727627, -102.656622391), (-18.113727627, -87.933852724), (-30.439767349, -87.933852724), (-30.439767349, 117.157752647), (-18.113727627, 117.157752647), (-18.113727627, 126.74467243), align=None)
    extrude(amount=-CUT_EXTRUDE5_DEPTH, mode=Mode.SUBTRACT)

    # Sketch11 → Cut-Extrude6 (cut, through all)
    with BuildSketch(Plane(origin=(0, -14.8, 0), x_dir=(1, 0, 0), z_dir=(0, 1, 0))):
        with Locations((79.084033791, 12.9)):
            Rectangle(SKETCH11_W, SKETCH11_H)
    extrude(amount=-CUT_EXTRUDE6_DEPTH, mode=Mode.SUBTRACT)


solid = part_1.part
